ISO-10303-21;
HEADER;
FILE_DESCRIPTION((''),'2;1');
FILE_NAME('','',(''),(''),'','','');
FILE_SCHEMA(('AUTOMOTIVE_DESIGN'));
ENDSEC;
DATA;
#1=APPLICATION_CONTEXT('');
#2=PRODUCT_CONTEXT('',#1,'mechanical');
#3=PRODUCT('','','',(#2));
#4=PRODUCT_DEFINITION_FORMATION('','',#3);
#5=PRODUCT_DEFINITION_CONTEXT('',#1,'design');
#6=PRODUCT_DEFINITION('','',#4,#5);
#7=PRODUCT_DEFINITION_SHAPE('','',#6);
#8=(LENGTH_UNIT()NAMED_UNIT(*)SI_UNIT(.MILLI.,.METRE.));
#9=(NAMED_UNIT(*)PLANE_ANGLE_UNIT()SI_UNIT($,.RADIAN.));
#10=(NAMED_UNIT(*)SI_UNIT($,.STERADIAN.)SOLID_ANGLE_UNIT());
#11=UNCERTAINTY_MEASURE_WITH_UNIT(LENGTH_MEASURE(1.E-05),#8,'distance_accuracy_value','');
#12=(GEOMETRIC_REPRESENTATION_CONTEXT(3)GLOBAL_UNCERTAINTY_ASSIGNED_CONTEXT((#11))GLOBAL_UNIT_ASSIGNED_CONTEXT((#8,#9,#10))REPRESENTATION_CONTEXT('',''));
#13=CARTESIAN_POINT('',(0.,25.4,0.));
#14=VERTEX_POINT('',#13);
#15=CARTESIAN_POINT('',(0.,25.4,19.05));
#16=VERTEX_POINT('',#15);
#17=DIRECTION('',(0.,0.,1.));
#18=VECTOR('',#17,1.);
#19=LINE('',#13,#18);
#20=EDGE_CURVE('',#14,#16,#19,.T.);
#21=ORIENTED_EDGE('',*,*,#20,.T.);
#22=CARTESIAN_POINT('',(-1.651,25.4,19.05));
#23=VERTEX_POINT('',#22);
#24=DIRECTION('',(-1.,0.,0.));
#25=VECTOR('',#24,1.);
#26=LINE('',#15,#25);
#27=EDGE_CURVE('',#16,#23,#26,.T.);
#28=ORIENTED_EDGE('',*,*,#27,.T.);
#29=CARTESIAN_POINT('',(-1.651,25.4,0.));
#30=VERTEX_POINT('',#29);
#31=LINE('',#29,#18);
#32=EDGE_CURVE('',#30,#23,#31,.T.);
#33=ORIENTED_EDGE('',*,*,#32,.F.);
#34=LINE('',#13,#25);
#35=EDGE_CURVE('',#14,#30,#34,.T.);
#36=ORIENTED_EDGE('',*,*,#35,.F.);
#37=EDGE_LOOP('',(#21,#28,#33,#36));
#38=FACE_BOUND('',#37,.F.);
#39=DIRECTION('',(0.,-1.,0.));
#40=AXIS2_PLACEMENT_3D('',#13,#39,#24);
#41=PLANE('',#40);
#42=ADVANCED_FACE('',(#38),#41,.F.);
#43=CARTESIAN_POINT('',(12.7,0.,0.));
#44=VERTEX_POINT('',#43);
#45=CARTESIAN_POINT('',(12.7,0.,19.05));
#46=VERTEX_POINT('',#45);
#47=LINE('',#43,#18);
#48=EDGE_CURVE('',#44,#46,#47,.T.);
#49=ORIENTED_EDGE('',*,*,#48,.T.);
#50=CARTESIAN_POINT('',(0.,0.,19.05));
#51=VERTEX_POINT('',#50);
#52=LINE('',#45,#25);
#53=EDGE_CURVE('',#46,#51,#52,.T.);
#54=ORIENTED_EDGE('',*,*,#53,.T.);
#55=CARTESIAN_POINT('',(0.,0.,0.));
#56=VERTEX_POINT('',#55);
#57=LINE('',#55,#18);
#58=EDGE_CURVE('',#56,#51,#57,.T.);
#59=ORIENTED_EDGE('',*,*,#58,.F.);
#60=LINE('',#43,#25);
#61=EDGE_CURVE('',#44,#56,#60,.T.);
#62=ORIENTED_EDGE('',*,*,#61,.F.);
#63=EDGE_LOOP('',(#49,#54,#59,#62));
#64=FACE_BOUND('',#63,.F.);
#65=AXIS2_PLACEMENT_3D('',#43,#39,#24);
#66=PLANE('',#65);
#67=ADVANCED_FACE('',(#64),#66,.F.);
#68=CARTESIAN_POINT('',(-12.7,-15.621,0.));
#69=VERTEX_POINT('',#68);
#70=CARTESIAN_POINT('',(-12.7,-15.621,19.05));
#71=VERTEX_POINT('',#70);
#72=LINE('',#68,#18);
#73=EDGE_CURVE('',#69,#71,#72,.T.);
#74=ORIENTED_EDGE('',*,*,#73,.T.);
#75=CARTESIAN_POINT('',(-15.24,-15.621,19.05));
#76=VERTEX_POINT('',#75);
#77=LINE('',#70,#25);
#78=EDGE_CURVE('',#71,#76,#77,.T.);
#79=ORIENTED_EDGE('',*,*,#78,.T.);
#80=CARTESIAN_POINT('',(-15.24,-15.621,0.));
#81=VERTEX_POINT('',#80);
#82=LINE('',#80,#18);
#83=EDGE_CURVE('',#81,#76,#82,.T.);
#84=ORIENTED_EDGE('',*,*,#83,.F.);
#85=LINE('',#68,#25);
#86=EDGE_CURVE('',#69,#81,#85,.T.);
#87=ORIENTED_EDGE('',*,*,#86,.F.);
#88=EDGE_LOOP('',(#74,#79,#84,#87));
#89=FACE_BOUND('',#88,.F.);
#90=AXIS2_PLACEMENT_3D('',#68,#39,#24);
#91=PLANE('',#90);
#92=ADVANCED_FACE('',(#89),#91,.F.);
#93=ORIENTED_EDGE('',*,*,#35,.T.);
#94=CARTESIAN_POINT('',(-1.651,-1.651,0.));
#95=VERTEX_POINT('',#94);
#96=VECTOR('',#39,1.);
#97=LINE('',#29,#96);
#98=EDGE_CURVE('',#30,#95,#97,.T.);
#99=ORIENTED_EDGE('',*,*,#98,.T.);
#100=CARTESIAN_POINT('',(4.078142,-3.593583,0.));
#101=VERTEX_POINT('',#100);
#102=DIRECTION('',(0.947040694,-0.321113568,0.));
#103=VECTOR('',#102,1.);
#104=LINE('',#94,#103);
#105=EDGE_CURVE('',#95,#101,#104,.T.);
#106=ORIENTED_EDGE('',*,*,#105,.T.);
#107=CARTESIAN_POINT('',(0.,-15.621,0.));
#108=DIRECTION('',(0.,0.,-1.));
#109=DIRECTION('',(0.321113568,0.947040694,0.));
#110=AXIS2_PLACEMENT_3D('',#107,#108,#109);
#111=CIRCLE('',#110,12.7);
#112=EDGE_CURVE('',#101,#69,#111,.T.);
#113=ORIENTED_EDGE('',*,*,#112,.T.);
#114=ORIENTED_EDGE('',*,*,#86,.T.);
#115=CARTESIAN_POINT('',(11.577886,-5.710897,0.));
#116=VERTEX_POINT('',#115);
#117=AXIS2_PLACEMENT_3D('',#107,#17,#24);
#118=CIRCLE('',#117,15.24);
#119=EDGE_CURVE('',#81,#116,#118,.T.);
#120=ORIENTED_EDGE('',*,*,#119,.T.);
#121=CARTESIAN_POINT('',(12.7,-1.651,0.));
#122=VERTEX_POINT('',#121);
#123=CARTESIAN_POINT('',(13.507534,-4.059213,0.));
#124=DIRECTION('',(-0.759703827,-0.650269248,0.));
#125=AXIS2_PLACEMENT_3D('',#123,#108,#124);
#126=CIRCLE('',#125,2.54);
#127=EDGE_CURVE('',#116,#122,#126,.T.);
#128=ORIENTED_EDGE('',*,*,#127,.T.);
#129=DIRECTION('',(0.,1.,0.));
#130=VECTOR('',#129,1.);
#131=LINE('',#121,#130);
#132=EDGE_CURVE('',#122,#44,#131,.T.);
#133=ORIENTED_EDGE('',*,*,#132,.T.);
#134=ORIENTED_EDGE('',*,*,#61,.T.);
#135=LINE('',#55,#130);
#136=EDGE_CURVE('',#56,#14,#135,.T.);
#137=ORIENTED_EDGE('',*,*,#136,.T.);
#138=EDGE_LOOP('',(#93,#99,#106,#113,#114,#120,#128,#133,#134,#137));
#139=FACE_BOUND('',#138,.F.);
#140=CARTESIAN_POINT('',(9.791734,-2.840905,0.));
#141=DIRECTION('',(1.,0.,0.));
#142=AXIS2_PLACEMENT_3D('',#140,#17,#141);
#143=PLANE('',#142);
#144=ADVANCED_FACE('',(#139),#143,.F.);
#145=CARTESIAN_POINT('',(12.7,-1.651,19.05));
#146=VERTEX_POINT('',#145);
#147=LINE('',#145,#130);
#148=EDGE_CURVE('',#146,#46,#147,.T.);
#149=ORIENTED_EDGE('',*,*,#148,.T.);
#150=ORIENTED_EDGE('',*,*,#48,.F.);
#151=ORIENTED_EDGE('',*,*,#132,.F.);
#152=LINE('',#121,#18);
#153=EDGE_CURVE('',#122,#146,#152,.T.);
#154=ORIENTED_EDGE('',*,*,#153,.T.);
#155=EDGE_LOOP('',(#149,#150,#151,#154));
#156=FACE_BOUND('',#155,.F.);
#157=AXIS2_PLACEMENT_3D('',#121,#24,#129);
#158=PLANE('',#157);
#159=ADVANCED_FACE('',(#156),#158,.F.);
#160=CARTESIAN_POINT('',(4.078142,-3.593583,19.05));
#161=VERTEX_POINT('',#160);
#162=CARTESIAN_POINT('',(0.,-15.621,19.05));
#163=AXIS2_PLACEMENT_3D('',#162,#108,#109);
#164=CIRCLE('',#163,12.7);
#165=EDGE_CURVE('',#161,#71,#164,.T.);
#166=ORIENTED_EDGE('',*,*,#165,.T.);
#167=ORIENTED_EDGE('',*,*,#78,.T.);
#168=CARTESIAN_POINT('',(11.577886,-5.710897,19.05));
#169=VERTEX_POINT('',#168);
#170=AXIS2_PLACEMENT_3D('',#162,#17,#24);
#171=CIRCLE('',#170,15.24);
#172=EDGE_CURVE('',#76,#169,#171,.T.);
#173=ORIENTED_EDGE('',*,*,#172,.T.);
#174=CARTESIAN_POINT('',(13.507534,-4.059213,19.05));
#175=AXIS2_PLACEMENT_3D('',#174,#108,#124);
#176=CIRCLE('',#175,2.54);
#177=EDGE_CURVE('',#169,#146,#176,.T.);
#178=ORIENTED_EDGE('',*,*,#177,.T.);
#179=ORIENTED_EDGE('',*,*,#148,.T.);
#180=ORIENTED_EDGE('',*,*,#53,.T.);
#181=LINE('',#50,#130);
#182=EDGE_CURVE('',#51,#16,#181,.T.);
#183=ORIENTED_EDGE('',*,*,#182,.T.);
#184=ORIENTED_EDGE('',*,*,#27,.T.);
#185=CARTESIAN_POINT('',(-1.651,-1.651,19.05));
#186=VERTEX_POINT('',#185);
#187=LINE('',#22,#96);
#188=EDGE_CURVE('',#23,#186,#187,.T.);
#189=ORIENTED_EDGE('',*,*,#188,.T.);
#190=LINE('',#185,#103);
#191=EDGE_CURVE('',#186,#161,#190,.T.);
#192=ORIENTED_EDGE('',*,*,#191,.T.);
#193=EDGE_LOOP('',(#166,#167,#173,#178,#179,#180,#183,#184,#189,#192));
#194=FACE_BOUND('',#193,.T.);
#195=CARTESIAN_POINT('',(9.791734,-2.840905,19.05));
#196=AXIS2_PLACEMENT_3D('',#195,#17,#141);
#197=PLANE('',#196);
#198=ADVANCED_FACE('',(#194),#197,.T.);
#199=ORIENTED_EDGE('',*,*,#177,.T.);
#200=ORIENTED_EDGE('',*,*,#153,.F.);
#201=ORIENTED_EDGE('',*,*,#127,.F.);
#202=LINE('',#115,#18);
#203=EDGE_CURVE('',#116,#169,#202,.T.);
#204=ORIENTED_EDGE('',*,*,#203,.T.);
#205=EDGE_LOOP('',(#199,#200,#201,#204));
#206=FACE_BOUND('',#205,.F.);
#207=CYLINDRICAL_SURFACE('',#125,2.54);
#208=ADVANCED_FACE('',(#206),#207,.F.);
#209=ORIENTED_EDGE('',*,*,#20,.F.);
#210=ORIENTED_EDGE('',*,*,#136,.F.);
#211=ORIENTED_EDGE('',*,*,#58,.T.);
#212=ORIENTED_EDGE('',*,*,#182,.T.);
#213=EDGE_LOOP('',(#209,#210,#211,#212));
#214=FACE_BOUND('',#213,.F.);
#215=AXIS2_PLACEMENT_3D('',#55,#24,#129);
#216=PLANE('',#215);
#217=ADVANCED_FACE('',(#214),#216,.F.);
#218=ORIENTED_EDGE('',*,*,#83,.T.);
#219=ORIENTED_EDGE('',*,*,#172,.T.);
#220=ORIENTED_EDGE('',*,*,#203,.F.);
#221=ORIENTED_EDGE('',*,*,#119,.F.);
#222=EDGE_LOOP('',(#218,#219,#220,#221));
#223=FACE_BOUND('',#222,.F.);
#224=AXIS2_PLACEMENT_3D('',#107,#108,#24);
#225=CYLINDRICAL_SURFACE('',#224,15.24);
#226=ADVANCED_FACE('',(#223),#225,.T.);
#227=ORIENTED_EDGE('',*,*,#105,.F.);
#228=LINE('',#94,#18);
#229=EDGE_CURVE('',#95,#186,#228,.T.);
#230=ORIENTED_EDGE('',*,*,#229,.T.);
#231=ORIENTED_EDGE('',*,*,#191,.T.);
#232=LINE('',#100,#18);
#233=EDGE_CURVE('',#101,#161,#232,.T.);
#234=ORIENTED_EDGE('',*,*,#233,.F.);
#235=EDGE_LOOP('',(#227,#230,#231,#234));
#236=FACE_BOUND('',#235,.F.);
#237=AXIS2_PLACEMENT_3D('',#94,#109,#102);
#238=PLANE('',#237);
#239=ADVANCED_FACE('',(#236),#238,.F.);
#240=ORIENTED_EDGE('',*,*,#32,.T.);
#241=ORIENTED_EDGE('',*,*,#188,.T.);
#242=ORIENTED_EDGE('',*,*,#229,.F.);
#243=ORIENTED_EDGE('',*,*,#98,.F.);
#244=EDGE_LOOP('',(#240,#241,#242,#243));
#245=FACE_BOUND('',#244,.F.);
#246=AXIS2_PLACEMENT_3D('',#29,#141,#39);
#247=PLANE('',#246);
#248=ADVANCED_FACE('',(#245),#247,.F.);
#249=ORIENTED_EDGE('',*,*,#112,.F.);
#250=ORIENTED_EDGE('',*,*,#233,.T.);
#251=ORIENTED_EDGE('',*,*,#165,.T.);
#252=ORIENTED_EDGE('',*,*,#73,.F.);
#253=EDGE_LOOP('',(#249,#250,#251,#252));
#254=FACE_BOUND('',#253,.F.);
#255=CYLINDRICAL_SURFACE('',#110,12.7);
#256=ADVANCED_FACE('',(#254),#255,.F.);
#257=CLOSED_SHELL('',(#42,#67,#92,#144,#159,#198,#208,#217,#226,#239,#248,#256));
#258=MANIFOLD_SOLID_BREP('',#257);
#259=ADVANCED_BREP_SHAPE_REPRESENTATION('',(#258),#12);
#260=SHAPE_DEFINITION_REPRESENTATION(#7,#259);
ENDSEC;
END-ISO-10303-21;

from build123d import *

# Parameters (mm, degrees)
F1_DEPTH    = 19.05
F2_T1_DEPTH = 19.05


# Not quite as in the source:
# - a fillet or chamfer that OpenCascade refuses, or shapes differently, is made with other operations: its cross-section is extruded or revolved along the edge and cut away or added


with BuildPart() as f1:
    # F0 (on Top) → F1 (new body)
    with BuildSketch(Plane.XY):
        Polygon((12.7, 0), (0, 0), (0, -1.651), (6.35, -1.651), (12.7, -1.651), align=None)
        Polygon((0, -1.651), (0, 0), (0, 25.4), (-1.651, 25.4), (-1.651, -1.651), align=None)
        with BuildLine():
            Line((6.35, -1.651), (0, -1.651))
            Line((0, -1.651), (-1.651, -1.651))
            Line((-1.651, -1.651), (4.0781423077, -3.5935831818))
            ThreePointArc((4.0781423077, -3.5935831818), (7.3992429576, -25.9428798508), (-12.7, -15.621))
            Line((-12.7, -15.621), (-15.24, -15.621))
            ThreePointArc((-15.24, -15.621), (7.485390628, -28.8960339791), (7.8868408329, -2.5804731058))
            Line((7.8868408329, -2.5804731058), (6.35, -1.651))
        make_face()
    extrude(amount=F1_DEPTH)

    # F2: fillet of radius 2.54 on 1 edges, made by hand

    # F2_s2 → F2_t1 (join)
    with BuildSketch(Plane.XY):
        with BuildLine():
            ThreePointArc((11.5778863285, -5.7108966623), (11.0593242469, -3.3825527689), (12.7, -1.651))
            Line((12.7, -1.651), (12.619246595, -1.4101787227))
            ThreePointArc((12.619246595, -1.4101787227), (9.525, -1.397), (6.35, -1.397))
            Line((6.35, -1.397), (6.2185526528, -1.8683421149))
            ThreePointArc((6.2185526528, -1.8683421149), (7.7553934856, -2.7978152207), (11.3849215563, -5.8760650512))
            Line((11.3849215563, -5.8760650512), (11.5778863285, -5.7108966623))
        make_face()
    extrude(amount=F2_T1_DEPTH)


solid = f1.part
